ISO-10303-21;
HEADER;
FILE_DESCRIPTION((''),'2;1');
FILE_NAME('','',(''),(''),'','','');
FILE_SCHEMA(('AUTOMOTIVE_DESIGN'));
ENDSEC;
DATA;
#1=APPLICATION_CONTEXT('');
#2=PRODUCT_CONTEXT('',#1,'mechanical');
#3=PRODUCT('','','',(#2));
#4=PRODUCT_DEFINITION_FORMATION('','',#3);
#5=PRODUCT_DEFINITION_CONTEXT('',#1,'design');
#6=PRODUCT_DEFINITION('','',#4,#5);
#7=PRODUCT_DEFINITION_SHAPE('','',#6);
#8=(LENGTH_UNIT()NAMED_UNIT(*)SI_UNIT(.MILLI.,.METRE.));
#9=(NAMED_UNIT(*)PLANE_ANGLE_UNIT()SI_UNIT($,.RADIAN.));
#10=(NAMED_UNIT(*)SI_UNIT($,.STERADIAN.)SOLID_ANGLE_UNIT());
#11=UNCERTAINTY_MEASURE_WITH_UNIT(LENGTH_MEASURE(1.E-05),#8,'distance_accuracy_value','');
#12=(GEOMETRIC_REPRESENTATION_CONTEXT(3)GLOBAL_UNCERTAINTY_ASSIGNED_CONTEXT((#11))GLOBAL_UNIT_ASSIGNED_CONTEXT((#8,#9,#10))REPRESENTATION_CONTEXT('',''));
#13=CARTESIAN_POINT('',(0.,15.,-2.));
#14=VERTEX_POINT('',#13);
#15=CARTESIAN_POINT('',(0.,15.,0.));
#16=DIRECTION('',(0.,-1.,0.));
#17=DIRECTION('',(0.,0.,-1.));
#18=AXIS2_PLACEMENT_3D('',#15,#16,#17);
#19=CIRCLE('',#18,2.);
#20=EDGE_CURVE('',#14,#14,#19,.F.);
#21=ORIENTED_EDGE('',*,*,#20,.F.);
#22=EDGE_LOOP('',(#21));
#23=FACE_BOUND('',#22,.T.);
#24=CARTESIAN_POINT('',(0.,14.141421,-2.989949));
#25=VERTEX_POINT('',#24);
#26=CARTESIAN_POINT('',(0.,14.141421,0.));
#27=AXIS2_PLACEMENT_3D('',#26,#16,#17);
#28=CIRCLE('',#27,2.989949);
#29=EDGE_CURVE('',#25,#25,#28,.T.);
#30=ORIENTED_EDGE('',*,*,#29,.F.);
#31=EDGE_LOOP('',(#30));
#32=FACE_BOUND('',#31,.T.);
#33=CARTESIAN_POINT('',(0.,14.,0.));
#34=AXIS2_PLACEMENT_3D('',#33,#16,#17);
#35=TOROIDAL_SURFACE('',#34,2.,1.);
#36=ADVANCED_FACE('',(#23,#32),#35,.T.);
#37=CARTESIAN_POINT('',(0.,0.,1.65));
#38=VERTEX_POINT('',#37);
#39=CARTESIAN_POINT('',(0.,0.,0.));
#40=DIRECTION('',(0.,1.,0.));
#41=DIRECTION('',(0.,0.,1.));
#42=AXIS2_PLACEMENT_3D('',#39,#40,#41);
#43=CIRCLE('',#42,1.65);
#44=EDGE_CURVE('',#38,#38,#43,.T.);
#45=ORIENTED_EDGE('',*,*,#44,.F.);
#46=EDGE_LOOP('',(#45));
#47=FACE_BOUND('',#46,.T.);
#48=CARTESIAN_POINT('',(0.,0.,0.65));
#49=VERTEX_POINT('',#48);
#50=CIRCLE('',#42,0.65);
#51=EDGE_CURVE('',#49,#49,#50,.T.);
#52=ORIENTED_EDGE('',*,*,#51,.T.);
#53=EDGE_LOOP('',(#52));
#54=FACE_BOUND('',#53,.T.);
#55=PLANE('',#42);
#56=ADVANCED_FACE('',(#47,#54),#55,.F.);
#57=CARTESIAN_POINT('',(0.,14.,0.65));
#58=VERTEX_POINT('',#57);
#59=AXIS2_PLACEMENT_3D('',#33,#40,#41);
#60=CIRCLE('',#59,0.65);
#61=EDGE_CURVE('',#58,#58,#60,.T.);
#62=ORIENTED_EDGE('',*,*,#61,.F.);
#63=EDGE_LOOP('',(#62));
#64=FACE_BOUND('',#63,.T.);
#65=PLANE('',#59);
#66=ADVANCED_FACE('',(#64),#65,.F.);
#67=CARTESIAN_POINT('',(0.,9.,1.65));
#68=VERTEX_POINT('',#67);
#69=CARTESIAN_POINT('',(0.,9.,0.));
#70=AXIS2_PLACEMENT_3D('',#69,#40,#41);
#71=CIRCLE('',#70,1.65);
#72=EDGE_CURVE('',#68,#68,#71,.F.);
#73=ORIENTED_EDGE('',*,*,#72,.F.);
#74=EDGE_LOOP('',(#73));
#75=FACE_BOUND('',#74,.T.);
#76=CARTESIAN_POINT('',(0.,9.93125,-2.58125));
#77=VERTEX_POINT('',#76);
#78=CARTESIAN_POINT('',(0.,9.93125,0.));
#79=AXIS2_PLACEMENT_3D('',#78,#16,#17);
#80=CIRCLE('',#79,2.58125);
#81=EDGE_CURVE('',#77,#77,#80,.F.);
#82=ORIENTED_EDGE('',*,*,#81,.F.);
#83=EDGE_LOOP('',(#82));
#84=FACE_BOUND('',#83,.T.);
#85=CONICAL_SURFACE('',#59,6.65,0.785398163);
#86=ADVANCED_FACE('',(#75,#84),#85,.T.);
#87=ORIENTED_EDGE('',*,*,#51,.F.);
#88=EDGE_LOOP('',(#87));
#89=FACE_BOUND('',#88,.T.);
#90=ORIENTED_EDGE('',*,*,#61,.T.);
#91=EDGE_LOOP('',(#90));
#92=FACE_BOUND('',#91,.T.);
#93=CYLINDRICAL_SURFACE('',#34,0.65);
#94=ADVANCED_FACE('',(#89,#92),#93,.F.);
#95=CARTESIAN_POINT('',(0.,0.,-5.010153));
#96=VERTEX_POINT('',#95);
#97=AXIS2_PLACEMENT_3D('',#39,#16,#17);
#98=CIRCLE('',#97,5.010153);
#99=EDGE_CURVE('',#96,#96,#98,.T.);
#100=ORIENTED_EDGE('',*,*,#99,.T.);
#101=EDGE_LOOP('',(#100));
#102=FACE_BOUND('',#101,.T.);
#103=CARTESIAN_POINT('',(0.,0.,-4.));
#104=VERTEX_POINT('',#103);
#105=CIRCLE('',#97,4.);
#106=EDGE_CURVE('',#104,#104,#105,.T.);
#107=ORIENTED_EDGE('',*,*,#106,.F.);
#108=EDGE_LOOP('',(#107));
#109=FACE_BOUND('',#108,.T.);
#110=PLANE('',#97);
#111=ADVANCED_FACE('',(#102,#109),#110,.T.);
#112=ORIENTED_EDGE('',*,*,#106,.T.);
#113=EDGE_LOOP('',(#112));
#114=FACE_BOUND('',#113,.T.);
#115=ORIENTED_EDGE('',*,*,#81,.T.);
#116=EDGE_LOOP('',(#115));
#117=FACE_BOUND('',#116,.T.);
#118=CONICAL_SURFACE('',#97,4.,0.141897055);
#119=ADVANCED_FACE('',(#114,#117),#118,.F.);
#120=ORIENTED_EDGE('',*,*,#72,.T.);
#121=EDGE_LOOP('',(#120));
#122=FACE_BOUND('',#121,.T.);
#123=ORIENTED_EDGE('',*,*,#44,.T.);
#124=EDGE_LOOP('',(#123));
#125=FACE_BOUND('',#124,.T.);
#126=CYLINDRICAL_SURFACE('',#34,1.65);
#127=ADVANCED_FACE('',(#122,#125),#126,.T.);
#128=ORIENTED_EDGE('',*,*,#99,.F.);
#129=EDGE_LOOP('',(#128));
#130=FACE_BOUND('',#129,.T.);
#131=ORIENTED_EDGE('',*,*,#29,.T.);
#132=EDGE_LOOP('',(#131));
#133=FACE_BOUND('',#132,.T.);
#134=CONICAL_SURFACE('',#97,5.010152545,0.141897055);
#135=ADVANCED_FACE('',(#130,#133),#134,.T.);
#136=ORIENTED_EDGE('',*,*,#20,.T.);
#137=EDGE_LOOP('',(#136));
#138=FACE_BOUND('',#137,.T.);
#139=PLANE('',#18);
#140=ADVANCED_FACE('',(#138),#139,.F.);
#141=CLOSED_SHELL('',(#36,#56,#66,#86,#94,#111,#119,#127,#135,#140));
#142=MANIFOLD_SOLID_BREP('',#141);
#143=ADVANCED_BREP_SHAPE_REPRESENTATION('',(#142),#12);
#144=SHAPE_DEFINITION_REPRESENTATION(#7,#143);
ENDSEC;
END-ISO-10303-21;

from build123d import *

# Parameters (mm, degrees)
SKETCH2_R           = 1.65
SKETCH2_R_2         = 0.65
BOSS_EXTRUDE1_DEPTH = 14
FILLET1_R           = 1


with BuildPart() as part:
    # Sketch2 → Boss-Extrude1 (new body)
    with BuildSketch(Plane(origin=(0, 0, 0), x_dir=(1, 0, 0), z_dir=(0, 1, 0))):
        with Locations(Location((0, 0, 0), (0, 0, 270))):
            Circle(SKETCH2_R)
        with Locations(Location((0, 0, 0), (0, 0, 270))):
            Circle(SKETCH2_R_2, mode=Mode.SUBTRACT)
    extrude(amount=BOSS_EXTRUDE1_DEPTH)

    # Sketch4 → Revolve1 (revolve)
    with BuildSketch(Plane.XY, mode=Mode.PRIVATE) as revolve1_sk:
        Polygon((2, 14), (4, 0), (5.010152545, 0), (3.010152545, 14), align=None)
        Polygon((2.867295402, 15), (3.010152545, 14), (0, 14), (0, 15), align=None)
    revolve(revolve1_sk.sketch.rotate(Axis((0, 0, 0), (0, 1, 0)), 90), axis=Axis((0, 0, 0), (0, 1, 0)))

    # Chamfer1: read off the stored shape, not the designer's step
    # Chamfer1 outline → Chamfer1 (revolve)
    with BuildSketch(Plane.XY):
        Polygon((1.65, 9), (2.58125, 9.93125), (2.58125, 14), (1.65, 14), align=None)
    revolve(axis=Axis((0, 0, 0), (0, 1, 0)))

    # Fillet1
    fillet1_edges = [part.edges().sort_by_distance(p)[0] for p in [
        (0, 15, 2.867295402),
    ]]
    fillet(fillet1_edges, radius=FILLET1_R)


solid = part.part
